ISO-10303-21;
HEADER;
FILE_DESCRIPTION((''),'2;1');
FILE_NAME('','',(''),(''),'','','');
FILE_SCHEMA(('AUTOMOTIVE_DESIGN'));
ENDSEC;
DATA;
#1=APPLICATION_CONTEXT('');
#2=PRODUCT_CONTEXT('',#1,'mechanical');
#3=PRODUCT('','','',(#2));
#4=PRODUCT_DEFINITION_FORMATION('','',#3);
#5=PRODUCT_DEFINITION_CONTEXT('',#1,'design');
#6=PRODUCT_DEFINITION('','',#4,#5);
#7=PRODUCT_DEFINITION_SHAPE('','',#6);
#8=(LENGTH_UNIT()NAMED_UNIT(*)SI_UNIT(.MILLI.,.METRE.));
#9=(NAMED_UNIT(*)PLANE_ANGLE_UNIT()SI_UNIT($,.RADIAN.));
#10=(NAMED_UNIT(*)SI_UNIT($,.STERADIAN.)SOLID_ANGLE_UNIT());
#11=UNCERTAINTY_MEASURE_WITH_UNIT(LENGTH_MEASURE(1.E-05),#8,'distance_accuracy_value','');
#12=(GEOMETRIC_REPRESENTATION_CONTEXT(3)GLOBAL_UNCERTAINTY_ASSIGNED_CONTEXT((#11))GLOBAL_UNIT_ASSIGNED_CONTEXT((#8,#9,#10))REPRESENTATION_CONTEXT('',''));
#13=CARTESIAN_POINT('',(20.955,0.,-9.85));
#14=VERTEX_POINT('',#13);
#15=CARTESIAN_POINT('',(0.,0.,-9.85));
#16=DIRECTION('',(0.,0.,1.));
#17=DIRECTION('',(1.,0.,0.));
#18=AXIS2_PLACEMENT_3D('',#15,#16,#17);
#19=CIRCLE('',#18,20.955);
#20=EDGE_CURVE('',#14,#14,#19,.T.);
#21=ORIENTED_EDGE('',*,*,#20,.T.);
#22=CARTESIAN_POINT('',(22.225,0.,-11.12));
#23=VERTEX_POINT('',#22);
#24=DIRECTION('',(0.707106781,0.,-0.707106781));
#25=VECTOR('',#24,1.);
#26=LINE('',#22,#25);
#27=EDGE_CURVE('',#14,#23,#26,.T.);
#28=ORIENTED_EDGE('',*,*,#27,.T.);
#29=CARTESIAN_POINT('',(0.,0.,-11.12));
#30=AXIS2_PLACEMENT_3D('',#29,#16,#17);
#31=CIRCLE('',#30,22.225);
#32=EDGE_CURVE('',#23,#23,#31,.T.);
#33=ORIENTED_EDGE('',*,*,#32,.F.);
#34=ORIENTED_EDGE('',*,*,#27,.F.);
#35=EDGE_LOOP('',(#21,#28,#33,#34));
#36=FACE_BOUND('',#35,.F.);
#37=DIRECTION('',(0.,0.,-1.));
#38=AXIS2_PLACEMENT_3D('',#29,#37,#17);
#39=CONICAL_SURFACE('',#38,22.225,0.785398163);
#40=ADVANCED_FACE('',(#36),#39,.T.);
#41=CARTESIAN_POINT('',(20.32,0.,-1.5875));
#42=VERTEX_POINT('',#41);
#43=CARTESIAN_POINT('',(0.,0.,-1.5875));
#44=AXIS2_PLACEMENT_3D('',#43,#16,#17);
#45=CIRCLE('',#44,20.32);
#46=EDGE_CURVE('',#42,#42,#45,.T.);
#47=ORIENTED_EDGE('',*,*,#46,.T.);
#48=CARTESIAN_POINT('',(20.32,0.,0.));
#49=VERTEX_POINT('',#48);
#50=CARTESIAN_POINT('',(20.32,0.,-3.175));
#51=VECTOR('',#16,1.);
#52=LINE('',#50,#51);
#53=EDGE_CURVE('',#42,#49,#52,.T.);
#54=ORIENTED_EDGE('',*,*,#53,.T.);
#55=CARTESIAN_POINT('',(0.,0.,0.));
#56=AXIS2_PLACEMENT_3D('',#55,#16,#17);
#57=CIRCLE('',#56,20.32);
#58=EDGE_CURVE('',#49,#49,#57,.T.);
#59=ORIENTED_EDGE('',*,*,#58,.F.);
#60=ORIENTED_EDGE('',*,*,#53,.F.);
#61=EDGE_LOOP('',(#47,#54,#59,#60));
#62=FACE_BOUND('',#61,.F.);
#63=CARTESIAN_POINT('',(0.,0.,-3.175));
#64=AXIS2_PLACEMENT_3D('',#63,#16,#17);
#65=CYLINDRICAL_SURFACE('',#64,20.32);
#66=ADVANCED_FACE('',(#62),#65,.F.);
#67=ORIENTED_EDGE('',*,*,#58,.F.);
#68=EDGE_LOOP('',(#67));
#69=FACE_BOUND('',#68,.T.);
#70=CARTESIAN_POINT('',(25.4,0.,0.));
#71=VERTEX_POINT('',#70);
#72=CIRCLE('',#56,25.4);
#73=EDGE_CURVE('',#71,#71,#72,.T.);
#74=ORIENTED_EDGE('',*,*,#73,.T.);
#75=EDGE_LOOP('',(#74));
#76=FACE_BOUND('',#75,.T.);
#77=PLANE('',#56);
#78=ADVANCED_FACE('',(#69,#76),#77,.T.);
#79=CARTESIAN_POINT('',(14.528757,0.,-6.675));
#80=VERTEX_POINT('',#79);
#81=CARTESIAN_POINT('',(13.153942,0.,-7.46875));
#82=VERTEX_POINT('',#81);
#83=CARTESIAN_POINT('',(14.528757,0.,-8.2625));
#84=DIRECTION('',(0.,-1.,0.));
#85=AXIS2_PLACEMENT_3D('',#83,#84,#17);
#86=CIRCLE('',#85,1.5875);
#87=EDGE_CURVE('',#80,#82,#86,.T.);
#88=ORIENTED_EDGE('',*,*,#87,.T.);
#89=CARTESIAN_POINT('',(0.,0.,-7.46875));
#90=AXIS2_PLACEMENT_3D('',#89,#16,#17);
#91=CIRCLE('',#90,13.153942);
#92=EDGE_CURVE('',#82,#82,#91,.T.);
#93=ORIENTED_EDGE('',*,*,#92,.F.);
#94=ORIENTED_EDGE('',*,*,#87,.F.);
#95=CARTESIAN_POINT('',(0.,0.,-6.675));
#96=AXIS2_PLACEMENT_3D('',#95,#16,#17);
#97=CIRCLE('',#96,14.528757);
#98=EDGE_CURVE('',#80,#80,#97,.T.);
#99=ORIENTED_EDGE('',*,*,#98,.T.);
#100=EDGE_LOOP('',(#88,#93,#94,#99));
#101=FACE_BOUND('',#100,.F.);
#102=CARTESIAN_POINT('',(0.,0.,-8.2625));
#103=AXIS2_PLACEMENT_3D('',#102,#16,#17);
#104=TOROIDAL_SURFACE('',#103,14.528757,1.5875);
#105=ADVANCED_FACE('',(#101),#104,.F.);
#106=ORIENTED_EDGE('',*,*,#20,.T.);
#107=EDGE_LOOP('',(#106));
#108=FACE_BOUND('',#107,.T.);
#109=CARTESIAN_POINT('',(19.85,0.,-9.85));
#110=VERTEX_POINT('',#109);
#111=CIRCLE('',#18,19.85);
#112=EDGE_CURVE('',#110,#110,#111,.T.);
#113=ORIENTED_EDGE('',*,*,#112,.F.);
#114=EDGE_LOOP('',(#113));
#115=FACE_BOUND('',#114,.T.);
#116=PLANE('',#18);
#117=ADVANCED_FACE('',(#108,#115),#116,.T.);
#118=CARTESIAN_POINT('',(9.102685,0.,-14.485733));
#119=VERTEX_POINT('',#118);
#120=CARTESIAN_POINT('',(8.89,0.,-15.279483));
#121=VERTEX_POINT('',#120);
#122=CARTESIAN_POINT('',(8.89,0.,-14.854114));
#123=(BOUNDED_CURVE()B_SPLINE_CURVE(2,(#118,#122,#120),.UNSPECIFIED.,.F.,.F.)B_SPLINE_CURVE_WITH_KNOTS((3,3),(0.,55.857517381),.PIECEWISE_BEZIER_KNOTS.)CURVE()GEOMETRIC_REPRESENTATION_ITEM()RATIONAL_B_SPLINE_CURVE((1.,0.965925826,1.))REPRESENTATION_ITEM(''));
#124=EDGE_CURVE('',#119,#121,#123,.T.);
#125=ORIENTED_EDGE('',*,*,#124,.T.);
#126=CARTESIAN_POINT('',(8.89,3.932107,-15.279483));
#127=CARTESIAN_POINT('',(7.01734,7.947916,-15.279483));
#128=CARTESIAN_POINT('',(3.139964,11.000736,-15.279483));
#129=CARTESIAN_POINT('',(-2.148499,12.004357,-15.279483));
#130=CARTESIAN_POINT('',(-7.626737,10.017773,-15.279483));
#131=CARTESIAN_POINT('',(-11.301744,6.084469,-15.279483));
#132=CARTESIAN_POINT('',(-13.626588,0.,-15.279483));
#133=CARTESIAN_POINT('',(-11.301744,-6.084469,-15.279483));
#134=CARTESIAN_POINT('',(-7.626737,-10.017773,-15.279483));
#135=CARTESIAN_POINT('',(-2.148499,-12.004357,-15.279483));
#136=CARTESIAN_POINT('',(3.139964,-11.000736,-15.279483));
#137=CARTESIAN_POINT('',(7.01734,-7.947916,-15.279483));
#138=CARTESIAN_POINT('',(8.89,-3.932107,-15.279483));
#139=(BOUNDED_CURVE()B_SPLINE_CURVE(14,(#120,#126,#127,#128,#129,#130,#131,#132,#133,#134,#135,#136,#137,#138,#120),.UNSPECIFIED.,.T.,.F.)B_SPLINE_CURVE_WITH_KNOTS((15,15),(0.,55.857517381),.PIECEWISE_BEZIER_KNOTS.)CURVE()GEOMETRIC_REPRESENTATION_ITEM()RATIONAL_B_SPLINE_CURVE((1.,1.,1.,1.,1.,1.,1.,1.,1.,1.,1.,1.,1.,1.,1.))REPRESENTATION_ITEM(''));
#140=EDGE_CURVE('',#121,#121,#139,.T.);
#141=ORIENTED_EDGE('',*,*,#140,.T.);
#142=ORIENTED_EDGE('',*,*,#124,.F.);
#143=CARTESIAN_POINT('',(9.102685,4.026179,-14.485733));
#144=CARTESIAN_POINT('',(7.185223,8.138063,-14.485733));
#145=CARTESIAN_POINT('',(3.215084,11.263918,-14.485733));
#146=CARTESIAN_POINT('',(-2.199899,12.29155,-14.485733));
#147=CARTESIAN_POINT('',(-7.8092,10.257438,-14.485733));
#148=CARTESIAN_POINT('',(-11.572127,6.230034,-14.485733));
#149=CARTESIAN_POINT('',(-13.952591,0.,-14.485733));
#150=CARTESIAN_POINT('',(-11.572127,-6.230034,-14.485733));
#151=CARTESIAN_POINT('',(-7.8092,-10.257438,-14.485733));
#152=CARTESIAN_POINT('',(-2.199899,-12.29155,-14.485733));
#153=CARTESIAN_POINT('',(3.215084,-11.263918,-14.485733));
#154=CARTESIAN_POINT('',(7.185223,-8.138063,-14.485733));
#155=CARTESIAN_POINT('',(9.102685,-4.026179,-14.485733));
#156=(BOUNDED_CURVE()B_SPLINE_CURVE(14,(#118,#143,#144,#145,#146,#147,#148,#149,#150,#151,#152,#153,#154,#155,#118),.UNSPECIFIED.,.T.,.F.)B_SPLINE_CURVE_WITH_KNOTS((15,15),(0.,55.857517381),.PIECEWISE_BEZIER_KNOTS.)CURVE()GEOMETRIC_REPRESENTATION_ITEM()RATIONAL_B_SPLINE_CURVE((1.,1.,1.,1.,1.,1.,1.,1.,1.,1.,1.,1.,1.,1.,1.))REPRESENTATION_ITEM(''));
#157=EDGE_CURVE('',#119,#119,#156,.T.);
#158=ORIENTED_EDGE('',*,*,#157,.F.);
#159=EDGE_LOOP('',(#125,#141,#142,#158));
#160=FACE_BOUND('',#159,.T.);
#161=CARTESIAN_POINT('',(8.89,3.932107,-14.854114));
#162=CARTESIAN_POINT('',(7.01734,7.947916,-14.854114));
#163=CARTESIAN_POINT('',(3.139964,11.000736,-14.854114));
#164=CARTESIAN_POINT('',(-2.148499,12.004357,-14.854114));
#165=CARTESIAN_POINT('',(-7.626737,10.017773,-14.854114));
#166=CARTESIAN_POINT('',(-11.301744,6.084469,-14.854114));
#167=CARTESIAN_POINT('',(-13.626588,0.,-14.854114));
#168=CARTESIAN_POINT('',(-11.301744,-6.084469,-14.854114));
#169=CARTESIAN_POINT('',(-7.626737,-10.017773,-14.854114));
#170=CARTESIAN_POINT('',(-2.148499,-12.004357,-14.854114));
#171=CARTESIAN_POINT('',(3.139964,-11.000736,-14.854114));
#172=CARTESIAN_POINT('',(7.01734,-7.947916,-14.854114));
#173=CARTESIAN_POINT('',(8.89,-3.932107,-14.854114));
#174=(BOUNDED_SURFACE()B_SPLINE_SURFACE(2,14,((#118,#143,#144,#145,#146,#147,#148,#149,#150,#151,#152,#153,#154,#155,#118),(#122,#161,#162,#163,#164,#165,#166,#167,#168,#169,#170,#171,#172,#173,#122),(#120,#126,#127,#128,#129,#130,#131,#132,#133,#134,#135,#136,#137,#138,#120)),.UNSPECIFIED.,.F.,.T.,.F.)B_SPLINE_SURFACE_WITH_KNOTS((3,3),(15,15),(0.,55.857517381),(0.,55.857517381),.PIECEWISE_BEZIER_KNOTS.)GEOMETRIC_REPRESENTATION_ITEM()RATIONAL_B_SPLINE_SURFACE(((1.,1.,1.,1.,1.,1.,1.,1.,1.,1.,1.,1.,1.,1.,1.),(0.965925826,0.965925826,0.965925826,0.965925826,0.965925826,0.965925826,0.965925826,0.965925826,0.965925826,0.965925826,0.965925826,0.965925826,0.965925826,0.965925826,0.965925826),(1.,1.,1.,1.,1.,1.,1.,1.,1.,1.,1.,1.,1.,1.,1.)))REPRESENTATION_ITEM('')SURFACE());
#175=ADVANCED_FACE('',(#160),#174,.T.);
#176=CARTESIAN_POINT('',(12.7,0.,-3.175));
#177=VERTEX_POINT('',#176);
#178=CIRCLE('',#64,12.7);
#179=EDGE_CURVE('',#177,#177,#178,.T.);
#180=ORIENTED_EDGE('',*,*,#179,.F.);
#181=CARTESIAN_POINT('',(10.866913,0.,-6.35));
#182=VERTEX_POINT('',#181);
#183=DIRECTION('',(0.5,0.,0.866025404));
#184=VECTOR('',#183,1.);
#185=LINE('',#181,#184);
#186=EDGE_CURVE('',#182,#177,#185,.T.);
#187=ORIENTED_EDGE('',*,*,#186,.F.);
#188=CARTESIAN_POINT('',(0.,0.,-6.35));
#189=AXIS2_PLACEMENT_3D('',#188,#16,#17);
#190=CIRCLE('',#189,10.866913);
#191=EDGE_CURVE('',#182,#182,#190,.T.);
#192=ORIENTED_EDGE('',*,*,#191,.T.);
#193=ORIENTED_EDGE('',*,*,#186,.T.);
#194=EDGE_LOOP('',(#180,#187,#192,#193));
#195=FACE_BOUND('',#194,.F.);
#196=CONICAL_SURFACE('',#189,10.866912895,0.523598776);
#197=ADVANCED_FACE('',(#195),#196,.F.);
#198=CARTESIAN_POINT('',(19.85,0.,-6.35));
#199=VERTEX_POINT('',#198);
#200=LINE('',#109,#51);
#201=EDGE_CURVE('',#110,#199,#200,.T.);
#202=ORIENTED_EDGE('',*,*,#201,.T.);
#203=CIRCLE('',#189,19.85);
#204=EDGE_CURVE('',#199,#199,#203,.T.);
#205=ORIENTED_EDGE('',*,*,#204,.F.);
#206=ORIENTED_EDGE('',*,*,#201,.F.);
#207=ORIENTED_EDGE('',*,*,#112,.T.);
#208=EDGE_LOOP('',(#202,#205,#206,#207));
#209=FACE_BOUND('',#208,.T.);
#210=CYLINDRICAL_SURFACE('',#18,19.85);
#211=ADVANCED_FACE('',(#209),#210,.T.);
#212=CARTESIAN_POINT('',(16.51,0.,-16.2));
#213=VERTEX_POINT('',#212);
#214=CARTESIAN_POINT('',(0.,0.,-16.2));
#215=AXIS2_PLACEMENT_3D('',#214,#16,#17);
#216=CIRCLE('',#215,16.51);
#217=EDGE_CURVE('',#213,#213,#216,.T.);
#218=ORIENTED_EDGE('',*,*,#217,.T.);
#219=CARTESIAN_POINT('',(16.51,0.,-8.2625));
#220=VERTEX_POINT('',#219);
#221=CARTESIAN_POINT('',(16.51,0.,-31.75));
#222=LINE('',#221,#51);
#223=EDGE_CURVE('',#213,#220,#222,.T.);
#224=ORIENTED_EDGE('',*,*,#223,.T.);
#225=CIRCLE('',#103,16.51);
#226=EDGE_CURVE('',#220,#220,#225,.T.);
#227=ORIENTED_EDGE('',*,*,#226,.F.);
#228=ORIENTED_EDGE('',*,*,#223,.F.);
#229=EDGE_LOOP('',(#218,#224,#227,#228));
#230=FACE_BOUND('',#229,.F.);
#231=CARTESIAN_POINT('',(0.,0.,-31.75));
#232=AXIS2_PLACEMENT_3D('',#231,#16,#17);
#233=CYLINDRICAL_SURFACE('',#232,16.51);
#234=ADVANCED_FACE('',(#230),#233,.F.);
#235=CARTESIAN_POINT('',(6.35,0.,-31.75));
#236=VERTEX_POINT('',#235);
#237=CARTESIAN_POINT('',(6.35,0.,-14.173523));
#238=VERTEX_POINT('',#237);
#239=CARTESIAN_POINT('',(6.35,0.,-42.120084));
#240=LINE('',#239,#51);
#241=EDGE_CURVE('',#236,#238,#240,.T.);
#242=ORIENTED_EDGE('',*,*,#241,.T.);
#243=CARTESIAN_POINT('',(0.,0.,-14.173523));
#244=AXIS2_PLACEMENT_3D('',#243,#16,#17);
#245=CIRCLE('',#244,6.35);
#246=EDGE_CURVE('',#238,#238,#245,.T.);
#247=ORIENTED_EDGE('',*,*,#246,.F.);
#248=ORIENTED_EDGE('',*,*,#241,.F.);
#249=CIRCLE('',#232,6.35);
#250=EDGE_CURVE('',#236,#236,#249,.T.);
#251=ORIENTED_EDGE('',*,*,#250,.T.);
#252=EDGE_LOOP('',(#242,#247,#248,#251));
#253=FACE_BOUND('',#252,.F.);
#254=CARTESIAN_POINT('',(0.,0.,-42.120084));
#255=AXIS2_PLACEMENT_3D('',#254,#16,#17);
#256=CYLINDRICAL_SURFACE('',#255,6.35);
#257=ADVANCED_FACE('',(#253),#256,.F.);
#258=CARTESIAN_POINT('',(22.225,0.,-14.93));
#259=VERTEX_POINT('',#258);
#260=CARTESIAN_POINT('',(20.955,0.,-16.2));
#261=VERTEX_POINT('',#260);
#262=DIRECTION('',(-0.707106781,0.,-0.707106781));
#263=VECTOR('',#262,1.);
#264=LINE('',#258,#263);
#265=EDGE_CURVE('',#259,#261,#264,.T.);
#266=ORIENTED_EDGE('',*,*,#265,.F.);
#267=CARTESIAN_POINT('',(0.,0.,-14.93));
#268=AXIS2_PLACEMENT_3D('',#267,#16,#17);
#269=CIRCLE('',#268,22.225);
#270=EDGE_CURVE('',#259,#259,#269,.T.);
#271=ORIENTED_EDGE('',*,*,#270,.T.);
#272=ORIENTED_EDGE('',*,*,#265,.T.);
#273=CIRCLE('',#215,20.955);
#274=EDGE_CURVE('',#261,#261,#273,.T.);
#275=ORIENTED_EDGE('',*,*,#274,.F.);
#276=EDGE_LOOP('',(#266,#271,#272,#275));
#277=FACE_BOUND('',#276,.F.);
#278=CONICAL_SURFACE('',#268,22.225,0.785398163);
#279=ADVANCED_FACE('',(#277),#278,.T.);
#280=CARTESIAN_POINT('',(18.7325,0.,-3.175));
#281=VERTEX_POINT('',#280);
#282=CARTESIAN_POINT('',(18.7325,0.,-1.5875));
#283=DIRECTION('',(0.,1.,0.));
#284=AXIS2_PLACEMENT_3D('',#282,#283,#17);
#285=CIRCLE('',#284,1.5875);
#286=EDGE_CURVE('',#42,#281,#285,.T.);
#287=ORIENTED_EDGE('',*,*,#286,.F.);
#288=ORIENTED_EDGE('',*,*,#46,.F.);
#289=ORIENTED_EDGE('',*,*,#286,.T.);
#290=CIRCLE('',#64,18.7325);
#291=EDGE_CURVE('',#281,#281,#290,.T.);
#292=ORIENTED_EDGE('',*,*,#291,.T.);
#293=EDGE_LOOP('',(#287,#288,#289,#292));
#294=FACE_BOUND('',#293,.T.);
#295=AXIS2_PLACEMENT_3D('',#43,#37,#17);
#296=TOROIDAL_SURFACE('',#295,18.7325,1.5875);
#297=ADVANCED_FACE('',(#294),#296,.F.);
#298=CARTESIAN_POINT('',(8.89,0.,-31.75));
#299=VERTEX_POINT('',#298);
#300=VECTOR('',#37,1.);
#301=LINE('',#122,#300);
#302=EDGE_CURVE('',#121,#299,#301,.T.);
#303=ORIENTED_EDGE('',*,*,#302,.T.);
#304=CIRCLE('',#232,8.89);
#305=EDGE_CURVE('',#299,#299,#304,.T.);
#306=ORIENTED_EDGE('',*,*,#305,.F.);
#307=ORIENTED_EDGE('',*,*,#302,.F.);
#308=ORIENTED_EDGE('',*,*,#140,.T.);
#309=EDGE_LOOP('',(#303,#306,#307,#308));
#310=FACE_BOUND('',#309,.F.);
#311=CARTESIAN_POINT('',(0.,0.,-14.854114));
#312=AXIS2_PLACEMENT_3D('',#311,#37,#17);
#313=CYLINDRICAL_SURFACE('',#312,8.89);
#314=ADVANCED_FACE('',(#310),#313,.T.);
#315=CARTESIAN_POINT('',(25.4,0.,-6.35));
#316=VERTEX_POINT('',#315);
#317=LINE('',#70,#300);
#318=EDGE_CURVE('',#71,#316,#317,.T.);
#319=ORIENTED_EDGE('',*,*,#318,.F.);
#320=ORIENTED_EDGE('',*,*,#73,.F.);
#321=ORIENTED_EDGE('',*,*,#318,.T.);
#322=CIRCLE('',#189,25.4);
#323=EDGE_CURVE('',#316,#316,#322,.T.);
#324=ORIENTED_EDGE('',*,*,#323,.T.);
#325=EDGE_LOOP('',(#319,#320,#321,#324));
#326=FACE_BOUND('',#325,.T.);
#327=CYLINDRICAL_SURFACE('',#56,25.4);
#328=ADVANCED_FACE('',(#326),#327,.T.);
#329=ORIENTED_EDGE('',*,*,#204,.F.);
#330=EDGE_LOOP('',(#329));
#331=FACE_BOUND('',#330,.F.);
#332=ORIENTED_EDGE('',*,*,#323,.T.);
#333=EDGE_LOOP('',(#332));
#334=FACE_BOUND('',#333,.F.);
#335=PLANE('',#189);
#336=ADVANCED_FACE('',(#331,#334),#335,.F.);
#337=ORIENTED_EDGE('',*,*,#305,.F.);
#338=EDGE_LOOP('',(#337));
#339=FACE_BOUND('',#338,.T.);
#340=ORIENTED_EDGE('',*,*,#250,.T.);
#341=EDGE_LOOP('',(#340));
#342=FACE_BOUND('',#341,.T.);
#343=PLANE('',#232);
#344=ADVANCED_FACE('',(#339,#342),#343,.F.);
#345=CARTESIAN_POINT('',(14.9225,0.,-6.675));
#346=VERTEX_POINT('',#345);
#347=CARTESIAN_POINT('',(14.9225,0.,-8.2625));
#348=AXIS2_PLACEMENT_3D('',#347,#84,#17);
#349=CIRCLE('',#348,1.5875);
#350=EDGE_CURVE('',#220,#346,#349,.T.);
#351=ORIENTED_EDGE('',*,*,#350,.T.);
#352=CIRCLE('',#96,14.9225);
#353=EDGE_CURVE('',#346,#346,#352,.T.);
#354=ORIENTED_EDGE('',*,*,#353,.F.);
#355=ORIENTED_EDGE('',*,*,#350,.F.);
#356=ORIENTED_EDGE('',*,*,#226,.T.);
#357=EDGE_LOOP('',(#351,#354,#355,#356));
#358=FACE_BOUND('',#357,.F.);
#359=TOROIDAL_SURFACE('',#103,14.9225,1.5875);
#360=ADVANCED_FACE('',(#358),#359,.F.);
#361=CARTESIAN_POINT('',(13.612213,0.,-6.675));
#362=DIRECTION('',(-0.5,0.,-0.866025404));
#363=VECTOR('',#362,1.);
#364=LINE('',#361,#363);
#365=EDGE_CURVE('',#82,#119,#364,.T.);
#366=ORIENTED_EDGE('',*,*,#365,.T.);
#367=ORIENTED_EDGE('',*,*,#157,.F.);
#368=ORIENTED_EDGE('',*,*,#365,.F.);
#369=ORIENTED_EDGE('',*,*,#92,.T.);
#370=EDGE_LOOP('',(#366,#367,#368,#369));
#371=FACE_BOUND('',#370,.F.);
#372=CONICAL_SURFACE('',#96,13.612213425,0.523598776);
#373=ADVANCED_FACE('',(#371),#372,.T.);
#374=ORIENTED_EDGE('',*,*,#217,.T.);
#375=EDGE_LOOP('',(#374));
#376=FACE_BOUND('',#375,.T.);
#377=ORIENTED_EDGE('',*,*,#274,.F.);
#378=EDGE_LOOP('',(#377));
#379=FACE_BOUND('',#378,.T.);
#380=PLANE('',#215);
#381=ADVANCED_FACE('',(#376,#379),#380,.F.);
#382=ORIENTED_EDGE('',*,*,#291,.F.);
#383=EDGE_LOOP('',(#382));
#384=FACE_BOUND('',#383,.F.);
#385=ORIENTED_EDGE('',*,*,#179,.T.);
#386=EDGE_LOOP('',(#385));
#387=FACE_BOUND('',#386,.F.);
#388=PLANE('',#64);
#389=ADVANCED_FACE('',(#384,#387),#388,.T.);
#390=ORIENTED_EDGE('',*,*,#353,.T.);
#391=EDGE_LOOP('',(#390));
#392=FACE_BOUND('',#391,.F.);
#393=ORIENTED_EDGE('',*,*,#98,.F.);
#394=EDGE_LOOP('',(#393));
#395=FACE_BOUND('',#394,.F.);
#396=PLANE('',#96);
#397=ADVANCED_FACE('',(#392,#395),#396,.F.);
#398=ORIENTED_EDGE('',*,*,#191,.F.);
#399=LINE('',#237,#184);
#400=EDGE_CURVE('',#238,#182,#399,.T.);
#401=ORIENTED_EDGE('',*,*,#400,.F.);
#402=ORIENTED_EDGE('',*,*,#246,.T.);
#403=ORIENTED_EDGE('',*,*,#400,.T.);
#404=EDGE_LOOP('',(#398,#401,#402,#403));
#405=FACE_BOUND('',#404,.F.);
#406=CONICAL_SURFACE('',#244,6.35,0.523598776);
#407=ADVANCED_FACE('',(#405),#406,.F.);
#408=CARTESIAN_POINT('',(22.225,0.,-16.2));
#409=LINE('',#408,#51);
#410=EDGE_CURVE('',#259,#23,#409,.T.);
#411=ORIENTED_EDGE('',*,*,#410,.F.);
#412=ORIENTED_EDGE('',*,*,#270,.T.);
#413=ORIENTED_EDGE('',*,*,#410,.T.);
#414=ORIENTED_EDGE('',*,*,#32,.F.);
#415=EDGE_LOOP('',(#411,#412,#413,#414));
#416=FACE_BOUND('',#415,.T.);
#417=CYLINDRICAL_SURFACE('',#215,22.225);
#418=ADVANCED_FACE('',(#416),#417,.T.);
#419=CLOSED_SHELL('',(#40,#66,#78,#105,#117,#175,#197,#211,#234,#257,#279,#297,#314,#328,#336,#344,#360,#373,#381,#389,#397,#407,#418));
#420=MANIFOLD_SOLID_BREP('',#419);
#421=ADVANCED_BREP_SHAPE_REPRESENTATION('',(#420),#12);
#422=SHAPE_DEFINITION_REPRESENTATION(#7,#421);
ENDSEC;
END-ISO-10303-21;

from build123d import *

# Parameters (mm, degrees)
F0_R     = 25.4
F1_DEPTH = 6.35
F4_SIZE  = 1.27
F9_R     = 1.5875


with BuildPart() as f1:
    # F0 (on Top) → F1 (new body)
    with BuildSketch(Plane.XY):
        Circle(F0_R)
    extrude(amount=-F1_DEPTH)

    # F2 (on Front) → F3 (revolve)
    with BuildSketch(Plane.XZ):
        Polygon((19.85, -6.35), (0, -6.35), (0, -31.75), (9.525, -31.75), (9.525, -16.2), (22.225, -16.2), (22.225, -9.85), (19.85, -9.85), align=None)
    revolve(axis=Axis((0, 0, -19.05), (0, 0, 1)))

    # F4
    f4_edges = [f1.edges().sort_by_distance(p)[0] for p in [
        (-22.225, 0, -9.85),
        (-22.225, 0, -16.2),
    ]]
    chamfer(f4_edges, length=F4_SIZE)

    # F5 (on Front) → F6 (revolve, cut)
    with BuildSketch(Plane.XZ):
        Polygon((20.32, 0), (0, 0), (0, -6.35), (10.8669128953, -6.35), (12.7, -3.175), (20.32, -3.175), align=None)
        Polygon((10.8669128953, -6.35), (0, -6.35), (0, -42.1200841665), (6.35, -42.1200841665), (6.35, -14.1735226281), align=None)
    revolve(axis=Axis((0, 0, 5.083523225), (0, 0, 1)), mode=Mode.SUBTRACT)

    # F7 (on Front) → F8 (revolve, cut)
    with BuildSketch(Plane.XZ):
        Polygon((16.51, -31.75), (16.51, -16.2), (9.525, -16.2), (8.89, -16.2), (8.89, -31.75), (9.525, -31.75), align=None)
        Polygon((9.525, -16.2), (16.51, -16.2), (16.51, -6.675), (13.6122134253, -6.675), (8.89, -14.8541135768), (8.89, -16.2), align=None)
    revolve(axis=Axis((0, 0, -10.6237775408), (0, 0, 1)), mode=Mode.SUBTRACT)

    # F9
    f9_edges = [f1.edges().sort_by_distance(p)[0] for p in [
        (-16.51, 0, -6.675),
        (16.51, 0, -11.4375),
        (-13.612213, 0, -6.675),
        (-20.32, 0, -3.175),
        (-8.89, 0, -14.854114),
    ]]
    fillet(f9_edges, radius=F9_R)


solid = f1.part
